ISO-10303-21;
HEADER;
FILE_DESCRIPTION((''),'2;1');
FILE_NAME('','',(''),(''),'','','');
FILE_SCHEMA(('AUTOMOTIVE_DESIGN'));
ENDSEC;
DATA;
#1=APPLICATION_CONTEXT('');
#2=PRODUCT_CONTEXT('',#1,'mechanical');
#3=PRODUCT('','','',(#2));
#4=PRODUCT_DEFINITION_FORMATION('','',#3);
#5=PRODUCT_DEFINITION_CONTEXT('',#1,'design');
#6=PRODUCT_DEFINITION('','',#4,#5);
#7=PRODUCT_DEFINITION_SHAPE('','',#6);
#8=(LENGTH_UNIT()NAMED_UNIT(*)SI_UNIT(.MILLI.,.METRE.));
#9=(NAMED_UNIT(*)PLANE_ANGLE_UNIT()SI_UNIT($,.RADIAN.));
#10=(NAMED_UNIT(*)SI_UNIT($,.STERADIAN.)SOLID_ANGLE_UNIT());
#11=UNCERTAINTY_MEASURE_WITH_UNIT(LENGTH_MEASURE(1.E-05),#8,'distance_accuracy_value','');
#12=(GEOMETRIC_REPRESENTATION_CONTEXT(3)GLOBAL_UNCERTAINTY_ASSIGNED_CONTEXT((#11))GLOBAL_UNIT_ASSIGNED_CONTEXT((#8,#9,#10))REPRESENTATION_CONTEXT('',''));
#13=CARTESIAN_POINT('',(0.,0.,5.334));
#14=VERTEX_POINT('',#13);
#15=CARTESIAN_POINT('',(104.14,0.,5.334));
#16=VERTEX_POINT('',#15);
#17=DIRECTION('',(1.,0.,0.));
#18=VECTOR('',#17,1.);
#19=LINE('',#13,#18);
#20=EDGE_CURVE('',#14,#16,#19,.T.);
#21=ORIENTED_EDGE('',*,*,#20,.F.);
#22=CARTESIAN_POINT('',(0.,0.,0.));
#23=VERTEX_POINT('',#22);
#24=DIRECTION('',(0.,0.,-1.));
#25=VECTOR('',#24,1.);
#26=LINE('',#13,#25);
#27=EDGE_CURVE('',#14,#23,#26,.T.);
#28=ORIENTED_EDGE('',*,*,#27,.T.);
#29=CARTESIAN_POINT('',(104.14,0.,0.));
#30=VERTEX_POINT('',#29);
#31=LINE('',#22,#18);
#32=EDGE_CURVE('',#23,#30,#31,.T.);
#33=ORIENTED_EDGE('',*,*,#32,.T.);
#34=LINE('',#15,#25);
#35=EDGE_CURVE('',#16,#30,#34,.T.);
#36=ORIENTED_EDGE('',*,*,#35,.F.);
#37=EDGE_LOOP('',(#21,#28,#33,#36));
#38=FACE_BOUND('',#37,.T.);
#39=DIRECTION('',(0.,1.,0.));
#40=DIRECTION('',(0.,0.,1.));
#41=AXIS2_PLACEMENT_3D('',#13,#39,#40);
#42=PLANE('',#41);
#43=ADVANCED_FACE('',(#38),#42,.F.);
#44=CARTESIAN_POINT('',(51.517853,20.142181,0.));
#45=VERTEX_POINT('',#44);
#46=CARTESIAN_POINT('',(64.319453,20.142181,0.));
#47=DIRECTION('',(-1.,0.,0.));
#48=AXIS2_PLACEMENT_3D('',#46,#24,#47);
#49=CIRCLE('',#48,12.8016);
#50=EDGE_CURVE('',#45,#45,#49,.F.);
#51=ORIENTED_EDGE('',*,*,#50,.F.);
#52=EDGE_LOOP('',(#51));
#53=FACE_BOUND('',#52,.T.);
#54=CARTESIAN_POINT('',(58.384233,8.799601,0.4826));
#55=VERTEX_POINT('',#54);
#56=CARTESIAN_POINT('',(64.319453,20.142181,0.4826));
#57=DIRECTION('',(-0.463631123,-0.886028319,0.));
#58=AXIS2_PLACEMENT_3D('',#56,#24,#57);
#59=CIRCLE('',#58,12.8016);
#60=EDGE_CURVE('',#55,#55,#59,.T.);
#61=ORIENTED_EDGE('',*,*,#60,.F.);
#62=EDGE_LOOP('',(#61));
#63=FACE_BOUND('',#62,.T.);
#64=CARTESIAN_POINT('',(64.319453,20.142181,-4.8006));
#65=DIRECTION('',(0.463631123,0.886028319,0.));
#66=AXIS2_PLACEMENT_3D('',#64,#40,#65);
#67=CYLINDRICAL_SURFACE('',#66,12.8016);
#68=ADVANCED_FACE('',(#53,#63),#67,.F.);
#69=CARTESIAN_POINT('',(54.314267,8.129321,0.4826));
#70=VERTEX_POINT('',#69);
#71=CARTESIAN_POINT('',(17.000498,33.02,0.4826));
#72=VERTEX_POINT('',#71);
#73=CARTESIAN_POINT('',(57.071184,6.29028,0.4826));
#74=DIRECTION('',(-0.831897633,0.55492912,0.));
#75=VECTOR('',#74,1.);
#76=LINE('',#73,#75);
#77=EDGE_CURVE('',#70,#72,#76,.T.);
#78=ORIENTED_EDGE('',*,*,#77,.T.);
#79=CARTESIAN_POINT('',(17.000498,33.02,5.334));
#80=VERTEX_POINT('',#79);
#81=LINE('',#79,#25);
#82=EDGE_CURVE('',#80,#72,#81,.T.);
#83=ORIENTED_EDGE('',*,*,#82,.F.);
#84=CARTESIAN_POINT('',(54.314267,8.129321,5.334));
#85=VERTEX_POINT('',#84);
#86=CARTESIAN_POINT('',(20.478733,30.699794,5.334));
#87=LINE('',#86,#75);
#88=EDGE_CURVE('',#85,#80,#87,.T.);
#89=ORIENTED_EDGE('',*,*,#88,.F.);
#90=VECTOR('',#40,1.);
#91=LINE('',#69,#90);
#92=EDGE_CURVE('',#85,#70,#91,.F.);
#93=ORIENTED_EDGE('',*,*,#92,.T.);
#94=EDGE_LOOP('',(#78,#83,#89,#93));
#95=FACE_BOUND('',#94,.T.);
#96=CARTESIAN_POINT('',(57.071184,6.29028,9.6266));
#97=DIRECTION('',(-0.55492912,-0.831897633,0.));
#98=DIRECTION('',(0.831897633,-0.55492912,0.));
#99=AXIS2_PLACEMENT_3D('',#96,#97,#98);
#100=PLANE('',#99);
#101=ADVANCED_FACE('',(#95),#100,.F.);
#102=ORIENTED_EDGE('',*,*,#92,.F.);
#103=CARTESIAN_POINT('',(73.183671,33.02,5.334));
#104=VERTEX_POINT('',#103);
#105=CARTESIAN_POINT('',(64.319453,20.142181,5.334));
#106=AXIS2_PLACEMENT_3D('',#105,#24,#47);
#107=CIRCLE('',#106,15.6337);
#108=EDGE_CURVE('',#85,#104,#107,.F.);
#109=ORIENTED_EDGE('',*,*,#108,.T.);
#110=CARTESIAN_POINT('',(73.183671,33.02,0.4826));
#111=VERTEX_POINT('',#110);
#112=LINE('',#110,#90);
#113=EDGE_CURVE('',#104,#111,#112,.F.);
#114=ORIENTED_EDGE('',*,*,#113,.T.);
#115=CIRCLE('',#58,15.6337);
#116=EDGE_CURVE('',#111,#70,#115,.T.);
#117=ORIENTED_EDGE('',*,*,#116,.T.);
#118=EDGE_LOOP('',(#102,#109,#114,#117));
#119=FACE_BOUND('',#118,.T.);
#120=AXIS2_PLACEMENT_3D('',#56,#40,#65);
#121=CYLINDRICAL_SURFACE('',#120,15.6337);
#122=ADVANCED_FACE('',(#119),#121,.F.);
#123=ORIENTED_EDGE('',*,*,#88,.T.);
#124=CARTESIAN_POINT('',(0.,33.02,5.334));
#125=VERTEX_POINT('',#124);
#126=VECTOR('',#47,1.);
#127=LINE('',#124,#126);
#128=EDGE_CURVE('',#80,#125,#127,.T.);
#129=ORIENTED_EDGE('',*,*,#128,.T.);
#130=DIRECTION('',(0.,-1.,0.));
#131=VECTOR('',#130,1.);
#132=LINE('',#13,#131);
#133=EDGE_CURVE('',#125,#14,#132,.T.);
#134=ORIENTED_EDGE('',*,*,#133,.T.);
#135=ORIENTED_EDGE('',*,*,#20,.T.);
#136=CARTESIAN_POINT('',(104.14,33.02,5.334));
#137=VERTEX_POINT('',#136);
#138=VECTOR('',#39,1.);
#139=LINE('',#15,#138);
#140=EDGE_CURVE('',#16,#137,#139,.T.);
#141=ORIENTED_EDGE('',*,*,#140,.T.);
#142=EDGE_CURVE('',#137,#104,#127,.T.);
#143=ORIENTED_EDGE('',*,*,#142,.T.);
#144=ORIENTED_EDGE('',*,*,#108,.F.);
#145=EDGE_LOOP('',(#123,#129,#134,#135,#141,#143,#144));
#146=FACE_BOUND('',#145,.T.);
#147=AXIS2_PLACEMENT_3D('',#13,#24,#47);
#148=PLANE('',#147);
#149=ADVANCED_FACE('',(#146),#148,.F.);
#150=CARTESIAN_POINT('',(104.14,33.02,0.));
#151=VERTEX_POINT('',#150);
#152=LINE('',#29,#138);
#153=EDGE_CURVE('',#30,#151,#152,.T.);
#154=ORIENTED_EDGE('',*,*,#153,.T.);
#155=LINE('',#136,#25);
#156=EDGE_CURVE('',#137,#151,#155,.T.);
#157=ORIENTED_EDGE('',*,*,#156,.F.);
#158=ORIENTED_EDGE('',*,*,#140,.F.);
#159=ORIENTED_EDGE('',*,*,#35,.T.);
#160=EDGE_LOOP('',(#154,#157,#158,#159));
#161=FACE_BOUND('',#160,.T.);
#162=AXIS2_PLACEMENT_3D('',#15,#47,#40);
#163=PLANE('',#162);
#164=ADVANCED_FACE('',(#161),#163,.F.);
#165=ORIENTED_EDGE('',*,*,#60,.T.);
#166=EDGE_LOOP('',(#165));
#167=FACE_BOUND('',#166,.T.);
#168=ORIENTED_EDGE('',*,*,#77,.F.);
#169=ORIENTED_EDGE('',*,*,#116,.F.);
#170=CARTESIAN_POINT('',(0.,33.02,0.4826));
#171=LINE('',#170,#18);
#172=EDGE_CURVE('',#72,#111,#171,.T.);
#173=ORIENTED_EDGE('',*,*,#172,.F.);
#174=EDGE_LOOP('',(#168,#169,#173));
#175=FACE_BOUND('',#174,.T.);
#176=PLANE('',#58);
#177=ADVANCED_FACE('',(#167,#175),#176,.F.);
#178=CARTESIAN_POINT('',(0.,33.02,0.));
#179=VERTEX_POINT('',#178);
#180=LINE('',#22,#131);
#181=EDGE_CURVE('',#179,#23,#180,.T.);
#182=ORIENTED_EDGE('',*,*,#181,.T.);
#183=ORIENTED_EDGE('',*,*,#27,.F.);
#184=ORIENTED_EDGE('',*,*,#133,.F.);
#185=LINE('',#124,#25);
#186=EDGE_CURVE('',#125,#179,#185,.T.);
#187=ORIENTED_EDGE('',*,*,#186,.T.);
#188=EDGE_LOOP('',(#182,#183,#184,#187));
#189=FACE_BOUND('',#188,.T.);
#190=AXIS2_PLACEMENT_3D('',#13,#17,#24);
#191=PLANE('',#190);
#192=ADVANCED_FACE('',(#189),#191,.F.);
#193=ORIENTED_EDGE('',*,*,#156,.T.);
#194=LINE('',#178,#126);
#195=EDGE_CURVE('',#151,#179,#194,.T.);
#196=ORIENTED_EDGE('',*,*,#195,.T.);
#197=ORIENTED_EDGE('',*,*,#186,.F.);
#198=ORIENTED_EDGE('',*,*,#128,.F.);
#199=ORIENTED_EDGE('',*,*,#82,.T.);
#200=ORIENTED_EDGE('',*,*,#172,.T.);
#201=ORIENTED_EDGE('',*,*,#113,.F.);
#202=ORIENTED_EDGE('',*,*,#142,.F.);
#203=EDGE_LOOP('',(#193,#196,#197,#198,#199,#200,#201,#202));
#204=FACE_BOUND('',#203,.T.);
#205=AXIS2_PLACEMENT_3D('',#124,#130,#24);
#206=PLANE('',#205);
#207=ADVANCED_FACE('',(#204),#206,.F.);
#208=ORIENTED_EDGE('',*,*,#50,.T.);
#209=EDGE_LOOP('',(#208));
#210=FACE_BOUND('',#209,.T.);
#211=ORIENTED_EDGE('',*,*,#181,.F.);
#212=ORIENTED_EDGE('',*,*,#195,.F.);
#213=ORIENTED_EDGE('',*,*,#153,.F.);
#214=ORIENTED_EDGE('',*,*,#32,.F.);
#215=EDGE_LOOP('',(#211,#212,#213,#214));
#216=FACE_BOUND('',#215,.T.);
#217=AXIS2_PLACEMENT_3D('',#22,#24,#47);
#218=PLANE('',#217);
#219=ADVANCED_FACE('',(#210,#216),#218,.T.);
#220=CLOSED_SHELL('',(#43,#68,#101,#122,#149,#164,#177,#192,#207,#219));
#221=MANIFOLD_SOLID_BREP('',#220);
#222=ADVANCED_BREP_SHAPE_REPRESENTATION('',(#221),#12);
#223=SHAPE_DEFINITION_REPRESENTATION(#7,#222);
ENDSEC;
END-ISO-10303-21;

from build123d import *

# Parameters (mm, degrees)
SKETCH2_W           = 104.14
SKETCH2_H           = 33.02
BOSS_EXTRUDE1_DEPTH = 5.334
CAVITY1_START       = 0.4826
CAVITY1_DEPTH       = 4.8514
CAVITY1_2_OUTLINE_R = 12.8016
CAVITY1_2_DEPTH     = 0.4826


# Read off the part's stored shape, not the designer's step: Cavity1
with BuildPart() as part:
    # Sketch2 → Boss-Extrude1 (new body)
    with BuildSketch(Plane.XY):
        with Locations((52.07, 16.51)):
            Rectangle(SKETCH2_W, SKETCH2_H)
    extrude(amount=BOSS_EXTRUDE1_DEPTH)

    # Cavity1 outline → Cavity1 (cut)
    with BuildSketch(Plane.XY.offset(CAVITY1_START)):
        with BuildLine():
            Line((73.183671361, 33.02), (17.000497532, 33.02))
            Line((17.000497532, 33.02), (54.31426706, 8.129320565))
            ThreePointArc((54.31426706, 8.129320565), (76.777861535, 10.697572054), (73.183671361, 33.02))
        make_face()
    extrude(amount=CAVITY1_DEPTH, mode=Mode.SUBTRACT)

    # Cavity1 2 outline → Cavity1 2 (cut)
    with BuildSketch(Plane.XY):
        with Locations((64.319453414, 20.142181246)):
            Circle(CAVITY1_2_OUTLINE_R)
    extrude(amount=CAVITY1_2_DEPTH, mode=Mode.SUBTRACT)


solid = part.part
